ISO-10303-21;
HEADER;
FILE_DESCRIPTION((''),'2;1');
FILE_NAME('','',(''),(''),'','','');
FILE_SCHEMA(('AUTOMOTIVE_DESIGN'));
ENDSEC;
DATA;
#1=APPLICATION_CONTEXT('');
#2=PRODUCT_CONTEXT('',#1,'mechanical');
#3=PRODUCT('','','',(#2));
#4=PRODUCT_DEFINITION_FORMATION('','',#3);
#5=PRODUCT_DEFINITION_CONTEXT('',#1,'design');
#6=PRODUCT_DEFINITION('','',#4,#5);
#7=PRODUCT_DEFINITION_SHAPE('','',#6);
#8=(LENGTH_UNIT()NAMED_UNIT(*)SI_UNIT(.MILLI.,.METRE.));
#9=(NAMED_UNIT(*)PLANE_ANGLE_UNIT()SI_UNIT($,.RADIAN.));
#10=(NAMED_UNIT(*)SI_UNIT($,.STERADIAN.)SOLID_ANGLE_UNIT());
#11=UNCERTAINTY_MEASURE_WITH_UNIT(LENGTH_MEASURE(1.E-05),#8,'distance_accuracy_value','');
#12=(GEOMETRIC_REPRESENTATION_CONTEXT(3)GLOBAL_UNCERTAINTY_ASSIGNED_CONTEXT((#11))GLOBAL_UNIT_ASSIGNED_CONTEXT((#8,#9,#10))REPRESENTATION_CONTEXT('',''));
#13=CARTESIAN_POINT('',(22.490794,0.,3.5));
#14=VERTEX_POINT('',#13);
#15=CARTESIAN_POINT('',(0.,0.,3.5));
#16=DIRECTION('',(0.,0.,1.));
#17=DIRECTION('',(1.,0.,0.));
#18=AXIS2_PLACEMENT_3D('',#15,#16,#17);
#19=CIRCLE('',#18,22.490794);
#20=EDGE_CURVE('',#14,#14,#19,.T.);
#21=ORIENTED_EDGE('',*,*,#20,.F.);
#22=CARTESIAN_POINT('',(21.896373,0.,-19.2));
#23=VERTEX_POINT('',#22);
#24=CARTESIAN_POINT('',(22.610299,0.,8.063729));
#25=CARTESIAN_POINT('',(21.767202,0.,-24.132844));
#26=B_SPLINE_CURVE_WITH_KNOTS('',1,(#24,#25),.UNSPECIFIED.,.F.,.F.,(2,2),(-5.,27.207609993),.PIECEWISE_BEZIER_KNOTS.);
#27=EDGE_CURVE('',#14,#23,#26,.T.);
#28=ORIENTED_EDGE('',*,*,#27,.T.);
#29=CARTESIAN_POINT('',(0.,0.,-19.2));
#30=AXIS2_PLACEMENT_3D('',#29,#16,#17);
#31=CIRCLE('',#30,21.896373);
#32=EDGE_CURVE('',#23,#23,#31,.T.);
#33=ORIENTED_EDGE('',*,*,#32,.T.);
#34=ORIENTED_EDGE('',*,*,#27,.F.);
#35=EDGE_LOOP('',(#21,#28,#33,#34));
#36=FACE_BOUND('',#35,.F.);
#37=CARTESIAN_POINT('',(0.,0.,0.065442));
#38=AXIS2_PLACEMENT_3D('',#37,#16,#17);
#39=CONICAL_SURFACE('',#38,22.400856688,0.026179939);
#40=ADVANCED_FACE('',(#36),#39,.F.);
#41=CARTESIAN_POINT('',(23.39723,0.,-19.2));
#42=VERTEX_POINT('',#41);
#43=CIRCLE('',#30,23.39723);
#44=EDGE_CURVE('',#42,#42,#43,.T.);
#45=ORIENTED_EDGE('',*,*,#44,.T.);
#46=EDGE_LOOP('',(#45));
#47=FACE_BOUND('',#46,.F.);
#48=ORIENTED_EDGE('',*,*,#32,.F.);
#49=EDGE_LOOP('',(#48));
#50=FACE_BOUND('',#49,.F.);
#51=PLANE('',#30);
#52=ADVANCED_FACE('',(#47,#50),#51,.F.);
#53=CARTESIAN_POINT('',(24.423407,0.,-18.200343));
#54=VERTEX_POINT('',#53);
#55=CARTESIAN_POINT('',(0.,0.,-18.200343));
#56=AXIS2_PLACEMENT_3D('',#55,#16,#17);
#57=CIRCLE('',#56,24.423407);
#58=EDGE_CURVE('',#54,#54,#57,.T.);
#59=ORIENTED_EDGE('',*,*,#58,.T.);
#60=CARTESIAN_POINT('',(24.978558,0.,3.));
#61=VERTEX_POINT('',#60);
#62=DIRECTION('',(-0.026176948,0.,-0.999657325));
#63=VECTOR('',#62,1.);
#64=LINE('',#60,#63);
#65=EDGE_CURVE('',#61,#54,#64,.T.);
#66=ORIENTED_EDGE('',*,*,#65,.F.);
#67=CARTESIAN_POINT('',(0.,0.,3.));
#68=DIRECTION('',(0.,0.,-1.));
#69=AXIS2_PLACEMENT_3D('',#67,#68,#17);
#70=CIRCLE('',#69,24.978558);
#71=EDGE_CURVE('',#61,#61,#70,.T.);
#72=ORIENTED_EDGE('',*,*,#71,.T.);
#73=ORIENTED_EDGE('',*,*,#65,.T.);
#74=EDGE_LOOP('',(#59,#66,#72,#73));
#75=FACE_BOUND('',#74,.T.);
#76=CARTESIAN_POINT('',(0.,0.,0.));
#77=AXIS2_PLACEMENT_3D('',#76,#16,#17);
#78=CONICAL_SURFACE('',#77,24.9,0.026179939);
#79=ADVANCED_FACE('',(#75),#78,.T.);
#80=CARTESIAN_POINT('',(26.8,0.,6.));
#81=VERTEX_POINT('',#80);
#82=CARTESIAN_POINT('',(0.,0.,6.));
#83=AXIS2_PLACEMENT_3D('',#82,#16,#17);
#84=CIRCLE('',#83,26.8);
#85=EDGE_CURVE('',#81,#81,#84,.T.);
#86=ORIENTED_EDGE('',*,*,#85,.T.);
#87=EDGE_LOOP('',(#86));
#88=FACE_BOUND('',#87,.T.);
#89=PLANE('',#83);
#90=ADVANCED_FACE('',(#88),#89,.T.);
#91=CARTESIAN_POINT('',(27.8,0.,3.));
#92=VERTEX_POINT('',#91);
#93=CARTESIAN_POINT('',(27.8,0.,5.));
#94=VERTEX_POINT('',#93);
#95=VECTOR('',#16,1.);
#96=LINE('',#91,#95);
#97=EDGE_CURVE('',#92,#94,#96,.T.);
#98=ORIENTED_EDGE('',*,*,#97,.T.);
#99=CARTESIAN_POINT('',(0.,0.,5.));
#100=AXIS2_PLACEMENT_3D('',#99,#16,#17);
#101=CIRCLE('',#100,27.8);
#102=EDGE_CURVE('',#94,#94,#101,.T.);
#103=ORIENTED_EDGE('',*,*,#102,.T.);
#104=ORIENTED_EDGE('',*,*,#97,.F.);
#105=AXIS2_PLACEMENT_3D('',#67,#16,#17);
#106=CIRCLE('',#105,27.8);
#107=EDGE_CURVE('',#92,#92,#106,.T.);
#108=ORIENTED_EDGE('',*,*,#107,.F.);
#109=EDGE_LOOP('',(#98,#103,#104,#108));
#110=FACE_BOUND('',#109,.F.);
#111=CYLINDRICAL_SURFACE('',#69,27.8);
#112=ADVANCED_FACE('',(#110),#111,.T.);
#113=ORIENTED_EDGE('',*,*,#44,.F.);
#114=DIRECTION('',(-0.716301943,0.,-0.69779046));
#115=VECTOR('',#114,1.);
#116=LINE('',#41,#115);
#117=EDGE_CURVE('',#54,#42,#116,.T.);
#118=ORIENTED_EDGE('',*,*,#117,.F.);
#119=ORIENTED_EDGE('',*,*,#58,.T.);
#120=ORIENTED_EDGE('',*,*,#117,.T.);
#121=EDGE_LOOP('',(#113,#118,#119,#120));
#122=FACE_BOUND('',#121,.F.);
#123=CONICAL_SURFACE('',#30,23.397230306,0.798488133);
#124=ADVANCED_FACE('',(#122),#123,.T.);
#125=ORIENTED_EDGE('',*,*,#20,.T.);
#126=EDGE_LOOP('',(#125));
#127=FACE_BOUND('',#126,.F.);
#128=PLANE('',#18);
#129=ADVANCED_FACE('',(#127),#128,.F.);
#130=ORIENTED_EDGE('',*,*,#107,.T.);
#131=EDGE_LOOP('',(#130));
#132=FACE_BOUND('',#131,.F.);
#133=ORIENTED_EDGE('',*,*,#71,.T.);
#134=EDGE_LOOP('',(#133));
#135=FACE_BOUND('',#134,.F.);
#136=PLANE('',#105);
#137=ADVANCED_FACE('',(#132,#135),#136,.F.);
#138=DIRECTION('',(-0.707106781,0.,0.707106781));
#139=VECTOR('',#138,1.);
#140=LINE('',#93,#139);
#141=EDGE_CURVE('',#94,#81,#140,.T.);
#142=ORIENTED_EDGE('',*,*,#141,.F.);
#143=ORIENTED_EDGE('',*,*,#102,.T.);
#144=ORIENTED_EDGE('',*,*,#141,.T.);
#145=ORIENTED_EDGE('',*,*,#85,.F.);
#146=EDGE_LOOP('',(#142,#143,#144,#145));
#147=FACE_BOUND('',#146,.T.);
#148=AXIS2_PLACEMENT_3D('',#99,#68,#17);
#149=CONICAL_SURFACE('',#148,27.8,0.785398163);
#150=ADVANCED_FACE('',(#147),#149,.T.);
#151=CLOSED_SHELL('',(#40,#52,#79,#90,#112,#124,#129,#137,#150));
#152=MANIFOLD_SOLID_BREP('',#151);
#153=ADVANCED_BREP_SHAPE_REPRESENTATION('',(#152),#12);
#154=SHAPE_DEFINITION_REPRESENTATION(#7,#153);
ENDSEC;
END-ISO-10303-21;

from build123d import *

# Parameters (mm, degrees)
F0_R          = 24.9
F1_DEPTH      = 19.2
F1_TAPER      = 1.5
F1_DEPTH_BACK = 3
F1_TAPER_BACK = -1.5
F2_R          = 27.8
F3_DEPTH      = 3
F4_SIZE       = 1
F5_T          = -2.5
F6_SIZE       = 1


with BuildPart() as f1:
    # F0 (on Top) → F1 (new body, two sides)
    with BuildSketch(Plane.XY) as f1_sk:
        Circle(F0_R)
    extrude(amount=-F1_DEPTH, taper=F1_TAPER)
    extrude(f1_sk.sketch, amount=F1_DEPTH_BACK, taper=F1_TAPER_BACK)

    # F2 (on face) → F3 (join)
    with BuildSketch(Plane.XY.offset(3)):
        Circle(F2_R)
    extrude(amount=F3_DEPTH)

    # F4
    f4_edges = [f1.edges().sort_by_distance(p)[0] for p in [
        (-27.8, 0, 6),
    ]]
    chamfer(f4_edges, length=F4_SIZE)

    # F5
    f5_openings = [f1.faces().sort_by_distance(p)[0] for p in [
        (0, 0, -19.2),
    ]]
    offset(amount=F5_T, openings=f5_openings, kind=Kind.INTERSECTION)

    # F6
    f6_edges = [f1.edges().sort_by_distance(p)[0] for p in [
        (-24.39723, 0, -19.2),
    ]]
    chamfer(f6_edges, length=F6_SIZE)


solid = f1.part
